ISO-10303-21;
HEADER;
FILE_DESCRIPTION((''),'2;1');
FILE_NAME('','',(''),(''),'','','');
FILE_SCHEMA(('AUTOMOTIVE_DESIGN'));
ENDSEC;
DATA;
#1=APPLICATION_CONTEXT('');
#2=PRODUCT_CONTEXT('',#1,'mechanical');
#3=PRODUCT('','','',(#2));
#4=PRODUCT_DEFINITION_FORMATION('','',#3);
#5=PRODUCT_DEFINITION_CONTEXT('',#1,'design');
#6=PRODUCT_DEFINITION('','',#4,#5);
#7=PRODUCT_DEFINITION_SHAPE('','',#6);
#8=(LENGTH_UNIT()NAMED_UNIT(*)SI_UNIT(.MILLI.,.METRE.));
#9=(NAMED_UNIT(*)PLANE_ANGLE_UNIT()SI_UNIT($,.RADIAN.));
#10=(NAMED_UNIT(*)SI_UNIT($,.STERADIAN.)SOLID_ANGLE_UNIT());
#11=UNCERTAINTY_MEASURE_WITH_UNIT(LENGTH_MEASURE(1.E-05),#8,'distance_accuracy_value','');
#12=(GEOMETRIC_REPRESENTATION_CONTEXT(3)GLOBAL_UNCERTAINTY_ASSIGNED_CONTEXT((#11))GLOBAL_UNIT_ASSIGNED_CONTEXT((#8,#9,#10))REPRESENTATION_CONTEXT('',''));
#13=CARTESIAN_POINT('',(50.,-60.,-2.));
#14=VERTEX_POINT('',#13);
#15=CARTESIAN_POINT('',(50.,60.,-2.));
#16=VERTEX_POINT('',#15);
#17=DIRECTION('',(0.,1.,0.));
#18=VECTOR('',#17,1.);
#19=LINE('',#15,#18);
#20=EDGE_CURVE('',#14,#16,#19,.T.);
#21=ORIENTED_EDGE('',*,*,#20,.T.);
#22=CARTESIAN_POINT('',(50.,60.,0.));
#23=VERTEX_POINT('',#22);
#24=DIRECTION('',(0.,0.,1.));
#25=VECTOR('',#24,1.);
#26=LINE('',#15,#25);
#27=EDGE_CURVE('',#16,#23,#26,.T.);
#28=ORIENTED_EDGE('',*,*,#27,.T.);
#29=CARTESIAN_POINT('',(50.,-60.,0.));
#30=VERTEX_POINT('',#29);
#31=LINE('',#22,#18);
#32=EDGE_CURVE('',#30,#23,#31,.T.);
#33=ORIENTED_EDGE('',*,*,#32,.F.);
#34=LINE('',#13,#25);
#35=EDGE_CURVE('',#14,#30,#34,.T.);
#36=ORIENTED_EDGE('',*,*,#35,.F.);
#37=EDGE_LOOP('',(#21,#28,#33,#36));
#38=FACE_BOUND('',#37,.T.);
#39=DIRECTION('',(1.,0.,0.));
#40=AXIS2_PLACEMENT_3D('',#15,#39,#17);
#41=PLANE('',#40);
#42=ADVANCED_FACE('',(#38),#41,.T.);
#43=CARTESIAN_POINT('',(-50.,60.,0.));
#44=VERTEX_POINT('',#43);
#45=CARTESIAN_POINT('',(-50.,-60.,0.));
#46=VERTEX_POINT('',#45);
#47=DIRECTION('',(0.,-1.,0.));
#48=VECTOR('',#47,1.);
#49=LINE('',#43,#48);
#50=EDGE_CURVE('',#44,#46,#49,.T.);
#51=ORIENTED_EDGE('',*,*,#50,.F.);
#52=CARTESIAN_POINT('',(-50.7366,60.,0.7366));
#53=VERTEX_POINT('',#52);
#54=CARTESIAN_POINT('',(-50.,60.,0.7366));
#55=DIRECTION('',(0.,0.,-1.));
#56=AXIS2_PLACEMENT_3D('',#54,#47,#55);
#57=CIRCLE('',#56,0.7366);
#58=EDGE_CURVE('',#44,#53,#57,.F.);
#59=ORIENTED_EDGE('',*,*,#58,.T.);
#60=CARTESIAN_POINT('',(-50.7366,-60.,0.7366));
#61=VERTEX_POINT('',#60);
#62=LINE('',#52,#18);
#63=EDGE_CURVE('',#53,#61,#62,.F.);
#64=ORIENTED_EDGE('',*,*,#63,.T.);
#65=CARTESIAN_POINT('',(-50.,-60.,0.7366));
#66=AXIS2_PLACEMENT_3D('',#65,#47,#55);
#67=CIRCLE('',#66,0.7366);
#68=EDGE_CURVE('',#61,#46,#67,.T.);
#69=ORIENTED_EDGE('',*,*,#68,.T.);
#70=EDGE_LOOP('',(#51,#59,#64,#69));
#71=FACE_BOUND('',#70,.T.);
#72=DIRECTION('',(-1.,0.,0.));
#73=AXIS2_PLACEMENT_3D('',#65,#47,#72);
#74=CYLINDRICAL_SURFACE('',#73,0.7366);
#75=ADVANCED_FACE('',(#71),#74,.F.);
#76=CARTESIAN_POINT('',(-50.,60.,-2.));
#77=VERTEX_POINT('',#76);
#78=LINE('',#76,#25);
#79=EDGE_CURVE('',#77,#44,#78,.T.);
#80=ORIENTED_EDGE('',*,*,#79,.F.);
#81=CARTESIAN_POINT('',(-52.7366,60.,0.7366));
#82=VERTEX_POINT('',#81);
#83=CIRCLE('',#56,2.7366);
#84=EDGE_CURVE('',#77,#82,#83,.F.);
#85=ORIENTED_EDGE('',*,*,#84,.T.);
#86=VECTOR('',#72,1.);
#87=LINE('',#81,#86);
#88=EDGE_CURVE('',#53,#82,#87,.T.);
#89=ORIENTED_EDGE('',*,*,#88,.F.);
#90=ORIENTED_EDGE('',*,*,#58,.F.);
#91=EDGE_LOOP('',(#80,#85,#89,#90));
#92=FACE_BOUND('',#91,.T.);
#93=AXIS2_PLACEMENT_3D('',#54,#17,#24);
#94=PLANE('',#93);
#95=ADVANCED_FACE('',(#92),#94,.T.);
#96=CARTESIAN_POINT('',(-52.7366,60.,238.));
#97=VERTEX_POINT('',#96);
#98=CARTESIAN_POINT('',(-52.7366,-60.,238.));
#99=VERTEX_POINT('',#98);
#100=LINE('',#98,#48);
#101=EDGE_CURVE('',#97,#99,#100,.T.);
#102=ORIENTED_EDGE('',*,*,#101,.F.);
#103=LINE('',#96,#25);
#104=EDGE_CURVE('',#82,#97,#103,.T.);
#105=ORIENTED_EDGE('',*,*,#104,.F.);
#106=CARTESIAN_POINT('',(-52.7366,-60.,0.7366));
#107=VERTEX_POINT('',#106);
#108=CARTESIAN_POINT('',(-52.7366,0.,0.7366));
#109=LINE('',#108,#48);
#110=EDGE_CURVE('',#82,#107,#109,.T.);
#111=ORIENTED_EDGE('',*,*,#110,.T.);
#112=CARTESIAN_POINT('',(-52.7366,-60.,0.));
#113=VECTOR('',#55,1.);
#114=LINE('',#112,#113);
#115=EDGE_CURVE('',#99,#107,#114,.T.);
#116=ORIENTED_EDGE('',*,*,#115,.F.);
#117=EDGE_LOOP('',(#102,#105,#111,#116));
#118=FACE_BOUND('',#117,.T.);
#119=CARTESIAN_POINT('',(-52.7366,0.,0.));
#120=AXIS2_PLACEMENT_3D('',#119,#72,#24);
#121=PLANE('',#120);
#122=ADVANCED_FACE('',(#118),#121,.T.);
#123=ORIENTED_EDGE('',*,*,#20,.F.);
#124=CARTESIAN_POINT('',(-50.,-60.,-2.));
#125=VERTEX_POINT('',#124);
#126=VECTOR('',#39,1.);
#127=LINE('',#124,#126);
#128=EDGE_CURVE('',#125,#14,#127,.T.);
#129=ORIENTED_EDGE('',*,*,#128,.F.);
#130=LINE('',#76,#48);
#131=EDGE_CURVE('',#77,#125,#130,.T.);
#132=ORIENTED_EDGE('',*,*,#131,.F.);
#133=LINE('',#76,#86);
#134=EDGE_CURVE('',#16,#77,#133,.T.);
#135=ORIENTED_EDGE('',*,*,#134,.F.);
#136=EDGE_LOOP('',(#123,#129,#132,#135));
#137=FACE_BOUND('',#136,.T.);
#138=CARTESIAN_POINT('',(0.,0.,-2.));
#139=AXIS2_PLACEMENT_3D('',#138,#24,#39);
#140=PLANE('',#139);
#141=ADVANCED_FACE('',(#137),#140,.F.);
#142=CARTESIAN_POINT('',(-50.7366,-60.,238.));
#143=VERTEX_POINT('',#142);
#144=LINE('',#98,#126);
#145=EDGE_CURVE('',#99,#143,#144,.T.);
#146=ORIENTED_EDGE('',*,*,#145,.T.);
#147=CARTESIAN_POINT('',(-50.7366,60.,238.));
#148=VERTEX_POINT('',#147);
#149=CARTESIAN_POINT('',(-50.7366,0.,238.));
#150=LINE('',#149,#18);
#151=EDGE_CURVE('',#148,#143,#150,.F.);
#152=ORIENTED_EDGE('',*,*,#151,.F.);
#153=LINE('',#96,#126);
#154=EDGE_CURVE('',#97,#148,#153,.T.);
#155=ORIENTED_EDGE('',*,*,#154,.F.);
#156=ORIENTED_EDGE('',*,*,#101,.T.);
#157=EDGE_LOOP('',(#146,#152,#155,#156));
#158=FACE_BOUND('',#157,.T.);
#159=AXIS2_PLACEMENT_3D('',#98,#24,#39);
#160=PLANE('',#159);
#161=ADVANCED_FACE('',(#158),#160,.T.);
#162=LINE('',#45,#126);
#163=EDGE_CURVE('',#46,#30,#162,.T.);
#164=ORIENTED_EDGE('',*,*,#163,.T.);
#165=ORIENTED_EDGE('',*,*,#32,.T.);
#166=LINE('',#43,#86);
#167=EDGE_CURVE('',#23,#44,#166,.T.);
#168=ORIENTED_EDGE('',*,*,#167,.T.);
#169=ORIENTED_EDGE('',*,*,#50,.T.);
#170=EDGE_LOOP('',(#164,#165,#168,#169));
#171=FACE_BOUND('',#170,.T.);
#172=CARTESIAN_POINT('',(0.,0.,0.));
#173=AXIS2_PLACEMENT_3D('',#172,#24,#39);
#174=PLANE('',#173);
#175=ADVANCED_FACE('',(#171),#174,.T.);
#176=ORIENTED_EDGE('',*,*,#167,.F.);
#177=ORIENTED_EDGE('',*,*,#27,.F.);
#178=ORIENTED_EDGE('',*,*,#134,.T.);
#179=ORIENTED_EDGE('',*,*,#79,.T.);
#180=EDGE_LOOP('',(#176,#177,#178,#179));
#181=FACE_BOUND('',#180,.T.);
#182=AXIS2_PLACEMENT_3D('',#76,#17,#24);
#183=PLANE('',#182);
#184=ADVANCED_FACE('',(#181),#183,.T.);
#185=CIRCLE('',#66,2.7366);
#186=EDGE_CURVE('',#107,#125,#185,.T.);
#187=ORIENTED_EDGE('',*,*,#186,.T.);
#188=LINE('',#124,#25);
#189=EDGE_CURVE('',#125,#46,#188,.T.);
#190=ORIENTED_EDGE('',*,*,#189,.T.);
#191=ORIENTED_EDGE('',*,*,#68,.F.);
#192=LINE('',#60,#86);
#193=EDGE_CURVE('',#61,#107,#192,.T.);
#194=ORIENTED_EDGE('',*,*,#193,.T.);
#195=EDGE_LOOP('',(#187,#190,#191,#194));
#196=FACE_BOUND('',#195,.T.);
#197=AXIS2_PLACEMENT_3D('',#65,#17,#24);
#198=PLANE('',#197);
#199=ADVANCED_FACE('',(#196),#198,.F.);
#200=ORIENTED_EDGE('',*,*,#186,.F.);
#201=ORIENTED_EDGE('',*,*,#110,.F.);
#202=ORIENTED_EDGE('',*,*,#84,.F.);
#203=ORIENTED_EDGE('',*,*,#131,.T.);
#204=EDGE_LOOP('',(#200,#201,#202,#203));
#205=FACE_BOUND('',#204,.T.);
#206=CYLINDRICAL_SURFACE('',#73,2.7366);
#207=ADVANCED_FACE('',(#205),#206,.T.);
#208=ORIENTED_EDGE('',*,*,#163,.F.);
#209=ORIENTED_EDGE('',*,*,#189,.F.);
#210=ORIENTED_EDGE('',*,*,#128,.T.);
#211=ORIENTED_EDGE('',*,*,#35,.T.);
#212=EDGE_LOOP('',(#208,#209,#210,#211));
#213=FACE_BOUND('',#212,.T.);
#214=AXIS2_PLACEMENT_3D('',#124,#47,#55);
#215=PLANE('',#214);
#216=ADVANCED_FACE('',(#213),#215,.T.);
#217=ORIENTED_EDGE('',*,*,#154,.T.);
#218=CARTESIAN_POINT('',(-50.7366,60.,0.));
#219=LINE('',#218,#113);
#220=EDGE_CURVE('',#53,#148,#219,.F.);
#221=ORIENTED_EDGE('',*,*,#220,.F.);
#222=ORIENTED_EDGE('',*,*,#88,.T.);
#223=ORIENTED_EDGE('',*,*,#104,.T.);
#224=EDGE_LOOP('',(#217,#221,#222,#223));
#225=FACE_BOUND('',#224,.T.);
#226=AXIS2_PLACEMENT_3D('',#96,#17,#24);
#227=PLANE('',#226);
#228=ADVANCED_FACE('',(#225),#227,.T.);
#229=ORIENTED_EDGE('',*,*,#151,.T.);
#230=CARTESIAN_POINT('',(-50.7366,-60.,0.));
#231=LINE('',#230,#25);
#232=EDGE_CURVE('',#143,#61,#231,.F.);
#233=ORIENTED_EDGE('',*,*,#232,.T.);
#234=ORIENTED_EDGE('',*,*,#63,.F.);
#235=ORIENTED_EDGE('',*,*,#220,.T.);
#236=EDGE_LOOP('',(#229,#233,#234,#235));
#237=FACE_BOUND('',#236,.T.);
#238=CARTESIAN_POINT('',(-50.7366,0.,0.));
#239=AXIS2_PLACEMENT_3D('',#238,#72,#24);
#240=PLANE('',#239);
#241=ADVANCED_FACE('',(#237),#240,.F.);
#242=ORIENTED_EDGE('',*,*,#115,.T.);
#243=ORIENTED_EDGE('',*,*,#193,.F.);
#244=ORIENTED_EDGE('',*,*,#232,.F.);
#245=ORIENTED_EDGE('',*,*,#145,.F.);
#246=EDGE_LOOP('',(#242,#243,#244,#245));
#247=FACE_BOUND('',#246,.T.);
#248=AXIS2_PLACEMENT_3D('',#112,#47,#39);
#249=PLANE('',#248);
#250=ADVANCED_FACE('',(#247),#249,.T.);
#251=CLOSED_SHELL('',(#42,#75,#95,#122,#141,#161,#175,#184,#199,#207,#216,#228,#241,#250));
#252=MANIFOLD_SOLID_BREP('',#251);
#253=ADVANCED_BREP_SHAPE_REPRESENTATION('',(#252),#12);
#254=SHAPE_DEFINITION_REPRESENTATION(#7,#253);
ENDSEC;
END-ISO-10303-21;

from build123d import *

# Parameters (mm, degrees)
SKETCH2_W          = 100
SKETCH2_H          = 120
BASE_FLANGE1_DEPTH = 2
EDGE_FLANGE1_DEPTH = 120


# Sheet-metal steps are written as plain solids
with BuildPart() as part:
    # Sketch2 → Base-Flange1 (new body)
    with BuildSketch(Plane.XY):
        Rectangle(SKETCH2_W, SKETCH2_H)
    extrude(amount=-BASE_FLANGE1_DEPTH)

    # Edge-Flange1 section (across the edge) → Edge-Flange1 (add)
    with BuildSketch(Plane(origin=(-50.7366, 60, 0), x_dir=(1, 0, 0), z_dir=(0, -1, 0))):
        with BuildLine():
            Line((-2, 0.7366), (-2, 238))
            Line((-2, 238), (0, 238))
            Line((0, 238), (0, 0.7366))
            ThreePointArc((0, 0.7366), (0.215745145, 0.215745145), (0.7366, 0))
            Line((0.7366, 0), (0.7366, -2))
            ThreePointArc((0.7366, -2), (-1.198468417, -1.198468417), (-2, 0.7366))
        make_face()
    extrude(amount=EDGE_FLANGE1_DEPTH)


solid = part.part
